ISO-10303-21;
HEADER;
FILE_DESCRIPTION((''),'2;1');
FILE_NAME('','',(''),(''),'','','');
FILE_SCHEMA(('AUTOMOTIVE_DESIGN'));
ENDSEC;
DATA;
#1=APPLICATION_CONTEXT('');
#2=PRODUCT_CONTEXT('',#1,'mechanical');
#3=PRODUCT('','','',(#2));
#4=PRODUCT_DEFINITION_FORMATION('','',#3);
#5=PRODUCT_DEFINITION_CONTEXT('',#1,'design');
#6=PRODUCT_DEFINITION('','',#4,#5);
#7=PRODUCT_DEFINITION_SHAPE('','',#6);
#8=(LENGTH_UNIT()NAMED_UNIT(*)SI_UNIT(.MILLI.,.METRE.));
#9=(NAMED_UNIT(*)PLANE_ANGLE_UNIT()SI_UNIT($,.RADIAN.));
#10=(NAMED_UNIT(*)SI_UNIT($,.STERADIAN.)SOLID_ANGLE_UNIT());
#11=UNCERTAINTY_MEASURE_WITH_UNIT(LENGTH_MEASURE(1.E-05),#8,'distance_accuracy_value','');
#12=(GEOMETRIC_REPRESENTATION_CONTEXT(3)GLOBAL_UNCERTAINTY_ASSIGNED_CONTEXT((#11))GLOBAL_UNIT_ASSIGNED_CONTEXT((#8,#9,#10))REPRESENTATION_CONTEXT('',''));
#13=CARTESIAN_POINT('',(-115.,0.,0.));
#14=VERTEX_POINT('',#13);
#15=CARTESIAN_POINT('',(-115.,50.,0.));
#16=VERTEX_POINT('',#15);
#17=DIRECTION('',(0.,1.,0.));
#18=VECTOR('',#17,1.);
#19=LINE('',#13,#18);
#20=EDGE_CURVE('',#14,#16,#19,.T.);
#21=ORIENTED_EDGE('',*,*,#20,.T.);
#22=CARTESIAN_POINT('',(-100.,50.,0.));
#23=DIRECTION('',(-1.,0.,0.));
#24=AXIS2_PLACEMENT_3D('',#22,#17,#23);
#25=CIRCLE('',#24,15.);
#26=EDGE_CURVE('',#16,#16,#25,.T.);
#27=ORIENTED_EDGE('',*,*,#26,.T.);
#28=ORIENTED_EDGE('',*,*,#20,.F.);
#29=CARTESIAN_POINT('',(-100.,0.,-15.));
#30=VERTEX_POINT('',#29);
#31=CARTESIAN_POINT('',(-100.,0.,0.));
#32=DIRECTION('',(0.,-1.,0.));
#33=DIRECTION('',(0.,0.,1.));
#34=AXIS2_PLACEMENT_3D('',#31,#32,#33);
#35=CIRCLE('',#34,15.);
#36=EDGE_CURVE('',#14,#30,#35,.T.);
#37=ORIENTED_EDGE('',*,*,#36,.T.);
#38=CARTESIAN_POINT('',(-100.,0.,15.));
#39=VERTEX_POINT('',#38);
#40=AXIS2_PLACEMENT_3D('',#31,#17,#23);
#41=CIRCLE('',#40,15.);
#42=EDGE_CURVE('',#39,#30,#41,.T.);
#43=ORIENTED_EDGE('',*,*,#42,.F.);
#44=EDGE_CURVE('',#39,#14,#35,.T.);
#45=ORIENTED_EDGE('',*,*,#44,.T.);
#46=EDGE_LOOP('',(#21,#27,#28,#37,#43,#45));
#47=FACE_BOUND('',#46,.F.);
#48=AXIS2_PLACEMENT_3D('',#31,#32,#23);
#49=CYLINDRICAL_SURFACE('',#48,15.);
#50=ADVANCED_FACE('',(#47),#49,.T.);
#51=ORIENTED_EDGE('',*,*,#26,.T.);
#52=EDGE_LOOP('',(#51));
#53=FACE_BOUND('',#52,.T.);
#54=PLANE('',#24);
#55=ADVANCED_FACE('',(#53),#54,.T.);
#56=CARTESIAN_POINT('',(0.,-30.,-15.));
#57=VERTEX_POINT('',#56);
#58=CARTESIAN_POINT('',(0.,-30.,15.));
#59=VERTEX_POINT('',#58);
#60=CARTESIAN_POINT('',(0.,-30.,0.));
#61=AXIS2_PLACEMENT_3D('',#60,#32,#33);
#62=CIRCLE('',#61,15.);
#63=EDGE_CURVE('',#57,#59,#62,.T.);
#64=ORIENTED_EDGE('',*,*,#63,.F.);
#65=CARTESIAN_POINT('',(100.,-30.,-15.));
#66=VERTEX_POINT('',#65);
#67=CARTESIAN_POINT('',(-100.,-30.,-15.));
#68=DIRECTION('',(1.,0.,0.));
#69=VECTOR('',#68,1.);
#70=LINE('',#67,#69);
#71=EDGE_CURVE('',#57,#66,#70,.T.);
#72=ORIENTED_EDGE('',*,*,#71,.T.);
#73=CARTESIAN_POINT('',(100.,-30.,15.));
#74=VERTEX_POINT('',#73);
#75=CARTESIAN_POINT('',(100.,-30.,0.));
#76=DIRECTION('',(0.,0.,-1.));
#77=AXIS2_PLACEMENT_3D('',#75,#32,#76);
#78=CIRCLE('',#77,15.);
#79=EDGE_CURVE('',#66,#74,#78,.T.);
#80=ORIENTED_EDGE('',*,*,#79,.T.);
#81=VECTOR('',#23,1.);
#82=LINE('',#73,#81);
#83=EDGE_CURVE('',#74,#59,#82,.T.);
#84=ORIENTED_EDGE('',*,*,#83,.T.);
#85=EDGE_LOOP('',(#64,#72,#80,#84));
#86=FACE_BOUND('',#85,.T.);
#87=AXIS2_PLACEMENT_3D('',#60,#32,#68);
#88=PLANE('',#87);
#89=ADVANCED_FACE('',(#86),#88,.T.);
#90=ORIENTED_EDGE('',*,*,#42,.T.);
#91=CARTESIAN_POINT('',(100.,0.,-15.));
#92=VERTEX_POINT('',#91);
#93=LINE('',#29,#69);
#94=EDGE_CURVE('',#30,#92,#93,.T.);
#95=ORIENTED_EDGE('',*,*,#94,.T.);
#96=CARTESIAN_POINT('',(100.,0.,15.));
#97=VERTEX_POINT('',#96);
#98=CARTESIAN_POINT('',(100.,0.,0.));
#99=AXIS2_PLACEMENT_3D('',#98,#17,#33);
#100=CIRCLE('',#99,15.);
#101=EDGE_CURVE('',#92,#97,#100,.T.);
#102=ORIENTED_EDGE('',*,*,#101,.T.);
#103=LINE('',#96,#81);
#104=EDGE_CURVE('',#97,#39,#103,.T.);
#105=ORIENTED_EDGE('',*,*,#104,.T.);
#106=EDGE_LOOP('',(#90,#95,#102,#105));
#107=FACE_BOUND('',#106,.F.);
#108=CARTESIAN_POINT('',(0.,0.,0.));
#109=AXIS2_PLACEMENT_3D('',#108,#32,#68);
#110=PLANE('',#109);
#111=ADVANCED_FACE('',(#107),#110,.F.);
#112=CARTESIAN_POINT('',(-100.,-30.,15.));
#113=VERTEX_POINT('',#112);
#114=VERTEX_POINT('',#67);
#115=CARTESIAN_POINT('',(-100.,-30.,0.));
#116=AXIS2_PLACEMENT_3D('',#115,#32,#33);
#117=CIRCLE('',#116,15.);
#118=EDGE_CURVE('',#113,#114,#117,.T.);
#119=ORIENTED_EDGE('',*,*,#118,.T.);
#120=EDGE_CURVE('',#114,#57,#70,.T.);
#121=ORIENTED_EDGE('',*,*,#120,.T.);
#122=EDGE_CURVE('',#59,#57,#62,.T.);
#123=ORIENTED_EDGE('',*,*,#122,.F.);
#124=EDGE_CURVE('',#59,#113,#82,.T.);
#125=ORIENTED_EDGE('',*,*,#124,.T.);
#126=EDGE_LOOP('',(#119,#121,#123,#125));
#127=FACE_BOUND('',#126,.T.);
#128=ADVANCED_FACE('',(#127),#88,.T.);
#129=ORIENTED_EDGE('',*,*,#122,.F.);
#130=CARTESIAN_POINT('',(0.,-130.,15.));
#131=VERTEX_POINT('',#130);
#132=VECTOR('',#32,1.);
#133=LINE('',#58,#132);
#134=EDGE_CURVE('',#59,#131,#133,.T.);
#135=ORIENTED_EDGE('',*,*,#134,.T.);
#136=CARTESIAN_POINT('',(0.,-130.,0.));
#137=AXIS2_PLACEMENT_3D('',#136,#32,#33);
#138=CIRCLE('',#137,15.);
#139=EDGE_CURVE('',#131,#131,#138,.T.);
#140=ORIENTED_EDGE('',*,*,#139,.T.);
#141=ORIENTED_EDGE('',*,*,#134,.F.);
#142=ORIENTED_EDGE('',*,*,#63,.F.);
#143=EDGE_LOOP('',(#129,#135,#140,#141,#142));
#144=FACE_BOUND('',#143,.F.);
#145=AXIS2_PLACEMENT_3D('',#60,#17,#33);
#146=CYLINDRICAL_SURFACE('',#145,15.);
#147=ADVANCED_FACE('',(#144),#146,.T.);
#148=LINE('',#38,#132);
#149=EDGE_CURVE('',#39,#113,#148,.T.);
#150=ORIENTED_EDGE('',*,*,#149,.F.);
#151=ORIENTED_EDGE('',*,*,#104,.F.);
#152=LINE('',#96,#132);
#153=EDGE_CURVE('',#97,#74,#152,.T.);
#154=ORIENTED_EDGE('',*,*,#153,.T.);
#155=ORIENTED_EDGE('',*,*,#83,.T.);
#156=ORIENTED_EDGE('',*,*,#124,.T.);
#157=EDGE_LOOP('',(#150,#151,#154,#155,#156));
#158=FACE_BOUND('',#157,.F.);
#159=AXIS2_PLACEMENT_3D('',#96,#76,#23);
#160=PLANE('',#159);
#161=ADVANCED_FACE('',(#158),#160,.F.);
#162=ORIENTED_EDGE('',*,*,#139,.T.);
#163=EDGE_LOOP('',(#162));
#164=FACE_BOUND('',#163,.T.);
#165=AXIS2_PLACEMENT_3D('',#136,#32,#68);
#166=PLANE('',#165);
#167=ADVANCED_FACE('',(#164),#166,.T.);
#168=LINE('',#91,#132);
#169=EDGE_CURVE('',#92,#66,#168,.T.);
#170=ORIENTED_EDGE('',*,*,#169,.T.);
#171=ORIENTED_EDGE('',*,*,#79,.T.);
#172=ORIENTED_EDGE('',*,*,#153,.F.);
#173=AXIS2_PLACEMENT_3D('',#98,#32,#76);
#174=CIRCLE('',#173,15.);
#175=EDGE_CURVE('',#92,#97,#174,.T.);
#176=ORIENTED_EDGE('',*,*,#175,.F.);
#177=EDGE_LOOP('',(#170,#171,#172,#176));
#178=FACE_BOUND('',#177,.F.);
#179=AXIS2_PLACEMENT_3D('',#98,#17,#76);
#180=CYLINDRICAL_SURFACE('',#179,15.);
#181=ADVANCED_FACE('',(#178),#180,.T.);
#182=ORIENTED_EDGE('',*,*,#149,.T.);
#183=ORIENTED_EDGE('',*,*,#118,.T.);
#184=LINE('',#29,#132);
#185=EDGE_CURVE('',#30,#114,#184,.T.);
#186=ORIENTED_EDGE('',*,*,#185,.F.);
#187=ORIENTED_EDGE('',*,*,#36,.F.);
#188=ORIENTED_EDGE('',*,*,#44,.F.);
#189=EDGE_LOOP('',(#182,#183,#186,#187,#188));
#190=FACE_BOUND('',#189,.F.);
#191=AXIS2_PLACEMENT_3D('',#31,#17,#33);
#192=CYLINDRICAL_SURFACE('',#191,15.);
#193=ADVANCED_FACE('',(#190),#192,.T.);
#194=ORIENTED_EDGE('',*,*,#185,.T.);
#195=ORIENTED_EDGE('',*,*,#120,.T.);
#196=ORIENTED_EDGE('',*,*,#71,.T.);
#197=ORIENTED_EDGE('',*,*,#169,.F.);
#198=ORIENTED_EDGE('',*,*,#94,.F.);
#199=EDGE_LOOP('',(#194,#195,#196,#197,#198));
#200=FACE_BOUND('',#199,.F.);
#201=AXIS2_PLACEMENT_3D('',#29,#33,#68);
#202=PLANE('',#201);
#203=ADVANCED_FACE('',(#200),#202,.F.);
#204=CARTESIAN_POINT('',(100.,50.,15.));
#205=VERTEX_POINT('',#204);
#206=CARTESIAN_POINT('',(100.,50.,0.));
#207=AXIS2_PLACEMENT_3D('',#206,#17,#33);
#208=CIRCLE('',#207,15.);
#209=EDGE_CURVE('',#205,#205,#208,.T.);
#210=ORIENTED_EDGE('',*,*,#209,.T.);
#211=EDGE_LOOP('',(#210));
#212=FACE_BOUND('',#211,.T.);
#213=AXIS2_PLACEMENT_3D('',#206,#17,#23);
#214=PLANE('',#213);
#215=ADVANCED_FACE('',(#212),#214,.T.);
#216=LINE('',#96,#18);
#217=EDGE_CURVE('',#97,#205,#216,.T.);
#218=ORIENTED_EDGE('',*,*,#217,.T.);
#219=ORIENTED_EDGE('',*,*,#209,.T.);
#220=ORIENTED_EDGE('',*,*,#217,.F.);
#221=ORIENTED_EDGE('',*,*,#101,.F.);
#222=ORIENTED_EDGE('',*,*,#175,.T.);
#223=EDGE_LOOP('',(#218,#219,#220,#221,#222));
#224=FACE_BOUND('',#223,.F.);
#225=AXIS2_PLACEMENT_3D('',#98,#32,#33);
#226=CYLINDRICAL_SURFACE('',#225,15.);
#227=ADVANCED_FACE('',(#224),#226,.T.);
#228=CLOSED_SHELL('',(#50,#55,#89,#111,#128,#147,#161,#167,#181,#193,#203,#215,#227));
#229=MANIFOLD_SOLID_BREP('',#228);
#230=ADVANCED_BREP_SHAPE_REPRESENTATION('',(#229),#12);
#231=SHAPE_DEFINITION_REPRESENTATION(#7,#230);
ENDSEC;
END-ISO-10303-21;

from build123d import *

# Parameters (mm, degrees)
F1_DEPTH = 30
F3_DEPTH = 100
F5_DEPTH = 50


with BuildPart() as f1:
    # F0 (on Front) → F1 (new body)
    with BuildSketch(Plane.XZ):
        with BuildLine():
            Line((100, 15), (-100, 15))
            ThreePointArc((-100, 15), (-115, 0), (-100, -15))
            Line((-100, -15), (100, -15))
            ThreePointArc((100, -15), (115, 0), (100, 15))
        make_face()
    extrude(amount=F1_DEPTH)

    # F2 (on face) → F3 (join)
    with BuildSketch(Plane.XZ.offset(30)):
        with BuildLine():
            ThreePointArc((3.16e-08, -15), (10.606601729, -10.6066017066), (15, 0))
            ThreePointArc((15, 0), (10.6066017178, 10.6066017178), (0, 15))
            ThreePointArc((0, 15), (-15, -1.58e-08), (3.16e-08, -15))
        make_face()
    extrude(amount=F3_DEPTH)

    # F4 (on face) → F5 (join)
    with BuildSketch(Plane(origin=(0, 0, 0), x_dir=(-1, 0, 0), z_dir=(0, 1, 0))):
        with BuildLine():
            ThreePointArc((-100, -15), (-89.3933982822, -10.6066017178), (-85, 0))
            ThreePointArc((-85, 0), (-89.3933982822, 10.6066017178), (-100, 15))
            ThreePointArc((-100, 15), (-115, 0), (-100, -15))
        make_face()
        with BuildLine():
            ThreePointArc((100, 15), (89.3933982822, 10.6066017178), (85, 0))
            ThreePointArc((85, 0), (89.3933982822, -10.6066017178), (100, -15))
            ThreePointArc((100, -15), (110.6066017178, -10.6066017178), (115, 0))
            ThreePointArc((115, 0), (110.6066017178, 10.6066017178), (100, 15))
        make_face()
    extrude(amount=F5_DEPTH)


solid = f1.part
